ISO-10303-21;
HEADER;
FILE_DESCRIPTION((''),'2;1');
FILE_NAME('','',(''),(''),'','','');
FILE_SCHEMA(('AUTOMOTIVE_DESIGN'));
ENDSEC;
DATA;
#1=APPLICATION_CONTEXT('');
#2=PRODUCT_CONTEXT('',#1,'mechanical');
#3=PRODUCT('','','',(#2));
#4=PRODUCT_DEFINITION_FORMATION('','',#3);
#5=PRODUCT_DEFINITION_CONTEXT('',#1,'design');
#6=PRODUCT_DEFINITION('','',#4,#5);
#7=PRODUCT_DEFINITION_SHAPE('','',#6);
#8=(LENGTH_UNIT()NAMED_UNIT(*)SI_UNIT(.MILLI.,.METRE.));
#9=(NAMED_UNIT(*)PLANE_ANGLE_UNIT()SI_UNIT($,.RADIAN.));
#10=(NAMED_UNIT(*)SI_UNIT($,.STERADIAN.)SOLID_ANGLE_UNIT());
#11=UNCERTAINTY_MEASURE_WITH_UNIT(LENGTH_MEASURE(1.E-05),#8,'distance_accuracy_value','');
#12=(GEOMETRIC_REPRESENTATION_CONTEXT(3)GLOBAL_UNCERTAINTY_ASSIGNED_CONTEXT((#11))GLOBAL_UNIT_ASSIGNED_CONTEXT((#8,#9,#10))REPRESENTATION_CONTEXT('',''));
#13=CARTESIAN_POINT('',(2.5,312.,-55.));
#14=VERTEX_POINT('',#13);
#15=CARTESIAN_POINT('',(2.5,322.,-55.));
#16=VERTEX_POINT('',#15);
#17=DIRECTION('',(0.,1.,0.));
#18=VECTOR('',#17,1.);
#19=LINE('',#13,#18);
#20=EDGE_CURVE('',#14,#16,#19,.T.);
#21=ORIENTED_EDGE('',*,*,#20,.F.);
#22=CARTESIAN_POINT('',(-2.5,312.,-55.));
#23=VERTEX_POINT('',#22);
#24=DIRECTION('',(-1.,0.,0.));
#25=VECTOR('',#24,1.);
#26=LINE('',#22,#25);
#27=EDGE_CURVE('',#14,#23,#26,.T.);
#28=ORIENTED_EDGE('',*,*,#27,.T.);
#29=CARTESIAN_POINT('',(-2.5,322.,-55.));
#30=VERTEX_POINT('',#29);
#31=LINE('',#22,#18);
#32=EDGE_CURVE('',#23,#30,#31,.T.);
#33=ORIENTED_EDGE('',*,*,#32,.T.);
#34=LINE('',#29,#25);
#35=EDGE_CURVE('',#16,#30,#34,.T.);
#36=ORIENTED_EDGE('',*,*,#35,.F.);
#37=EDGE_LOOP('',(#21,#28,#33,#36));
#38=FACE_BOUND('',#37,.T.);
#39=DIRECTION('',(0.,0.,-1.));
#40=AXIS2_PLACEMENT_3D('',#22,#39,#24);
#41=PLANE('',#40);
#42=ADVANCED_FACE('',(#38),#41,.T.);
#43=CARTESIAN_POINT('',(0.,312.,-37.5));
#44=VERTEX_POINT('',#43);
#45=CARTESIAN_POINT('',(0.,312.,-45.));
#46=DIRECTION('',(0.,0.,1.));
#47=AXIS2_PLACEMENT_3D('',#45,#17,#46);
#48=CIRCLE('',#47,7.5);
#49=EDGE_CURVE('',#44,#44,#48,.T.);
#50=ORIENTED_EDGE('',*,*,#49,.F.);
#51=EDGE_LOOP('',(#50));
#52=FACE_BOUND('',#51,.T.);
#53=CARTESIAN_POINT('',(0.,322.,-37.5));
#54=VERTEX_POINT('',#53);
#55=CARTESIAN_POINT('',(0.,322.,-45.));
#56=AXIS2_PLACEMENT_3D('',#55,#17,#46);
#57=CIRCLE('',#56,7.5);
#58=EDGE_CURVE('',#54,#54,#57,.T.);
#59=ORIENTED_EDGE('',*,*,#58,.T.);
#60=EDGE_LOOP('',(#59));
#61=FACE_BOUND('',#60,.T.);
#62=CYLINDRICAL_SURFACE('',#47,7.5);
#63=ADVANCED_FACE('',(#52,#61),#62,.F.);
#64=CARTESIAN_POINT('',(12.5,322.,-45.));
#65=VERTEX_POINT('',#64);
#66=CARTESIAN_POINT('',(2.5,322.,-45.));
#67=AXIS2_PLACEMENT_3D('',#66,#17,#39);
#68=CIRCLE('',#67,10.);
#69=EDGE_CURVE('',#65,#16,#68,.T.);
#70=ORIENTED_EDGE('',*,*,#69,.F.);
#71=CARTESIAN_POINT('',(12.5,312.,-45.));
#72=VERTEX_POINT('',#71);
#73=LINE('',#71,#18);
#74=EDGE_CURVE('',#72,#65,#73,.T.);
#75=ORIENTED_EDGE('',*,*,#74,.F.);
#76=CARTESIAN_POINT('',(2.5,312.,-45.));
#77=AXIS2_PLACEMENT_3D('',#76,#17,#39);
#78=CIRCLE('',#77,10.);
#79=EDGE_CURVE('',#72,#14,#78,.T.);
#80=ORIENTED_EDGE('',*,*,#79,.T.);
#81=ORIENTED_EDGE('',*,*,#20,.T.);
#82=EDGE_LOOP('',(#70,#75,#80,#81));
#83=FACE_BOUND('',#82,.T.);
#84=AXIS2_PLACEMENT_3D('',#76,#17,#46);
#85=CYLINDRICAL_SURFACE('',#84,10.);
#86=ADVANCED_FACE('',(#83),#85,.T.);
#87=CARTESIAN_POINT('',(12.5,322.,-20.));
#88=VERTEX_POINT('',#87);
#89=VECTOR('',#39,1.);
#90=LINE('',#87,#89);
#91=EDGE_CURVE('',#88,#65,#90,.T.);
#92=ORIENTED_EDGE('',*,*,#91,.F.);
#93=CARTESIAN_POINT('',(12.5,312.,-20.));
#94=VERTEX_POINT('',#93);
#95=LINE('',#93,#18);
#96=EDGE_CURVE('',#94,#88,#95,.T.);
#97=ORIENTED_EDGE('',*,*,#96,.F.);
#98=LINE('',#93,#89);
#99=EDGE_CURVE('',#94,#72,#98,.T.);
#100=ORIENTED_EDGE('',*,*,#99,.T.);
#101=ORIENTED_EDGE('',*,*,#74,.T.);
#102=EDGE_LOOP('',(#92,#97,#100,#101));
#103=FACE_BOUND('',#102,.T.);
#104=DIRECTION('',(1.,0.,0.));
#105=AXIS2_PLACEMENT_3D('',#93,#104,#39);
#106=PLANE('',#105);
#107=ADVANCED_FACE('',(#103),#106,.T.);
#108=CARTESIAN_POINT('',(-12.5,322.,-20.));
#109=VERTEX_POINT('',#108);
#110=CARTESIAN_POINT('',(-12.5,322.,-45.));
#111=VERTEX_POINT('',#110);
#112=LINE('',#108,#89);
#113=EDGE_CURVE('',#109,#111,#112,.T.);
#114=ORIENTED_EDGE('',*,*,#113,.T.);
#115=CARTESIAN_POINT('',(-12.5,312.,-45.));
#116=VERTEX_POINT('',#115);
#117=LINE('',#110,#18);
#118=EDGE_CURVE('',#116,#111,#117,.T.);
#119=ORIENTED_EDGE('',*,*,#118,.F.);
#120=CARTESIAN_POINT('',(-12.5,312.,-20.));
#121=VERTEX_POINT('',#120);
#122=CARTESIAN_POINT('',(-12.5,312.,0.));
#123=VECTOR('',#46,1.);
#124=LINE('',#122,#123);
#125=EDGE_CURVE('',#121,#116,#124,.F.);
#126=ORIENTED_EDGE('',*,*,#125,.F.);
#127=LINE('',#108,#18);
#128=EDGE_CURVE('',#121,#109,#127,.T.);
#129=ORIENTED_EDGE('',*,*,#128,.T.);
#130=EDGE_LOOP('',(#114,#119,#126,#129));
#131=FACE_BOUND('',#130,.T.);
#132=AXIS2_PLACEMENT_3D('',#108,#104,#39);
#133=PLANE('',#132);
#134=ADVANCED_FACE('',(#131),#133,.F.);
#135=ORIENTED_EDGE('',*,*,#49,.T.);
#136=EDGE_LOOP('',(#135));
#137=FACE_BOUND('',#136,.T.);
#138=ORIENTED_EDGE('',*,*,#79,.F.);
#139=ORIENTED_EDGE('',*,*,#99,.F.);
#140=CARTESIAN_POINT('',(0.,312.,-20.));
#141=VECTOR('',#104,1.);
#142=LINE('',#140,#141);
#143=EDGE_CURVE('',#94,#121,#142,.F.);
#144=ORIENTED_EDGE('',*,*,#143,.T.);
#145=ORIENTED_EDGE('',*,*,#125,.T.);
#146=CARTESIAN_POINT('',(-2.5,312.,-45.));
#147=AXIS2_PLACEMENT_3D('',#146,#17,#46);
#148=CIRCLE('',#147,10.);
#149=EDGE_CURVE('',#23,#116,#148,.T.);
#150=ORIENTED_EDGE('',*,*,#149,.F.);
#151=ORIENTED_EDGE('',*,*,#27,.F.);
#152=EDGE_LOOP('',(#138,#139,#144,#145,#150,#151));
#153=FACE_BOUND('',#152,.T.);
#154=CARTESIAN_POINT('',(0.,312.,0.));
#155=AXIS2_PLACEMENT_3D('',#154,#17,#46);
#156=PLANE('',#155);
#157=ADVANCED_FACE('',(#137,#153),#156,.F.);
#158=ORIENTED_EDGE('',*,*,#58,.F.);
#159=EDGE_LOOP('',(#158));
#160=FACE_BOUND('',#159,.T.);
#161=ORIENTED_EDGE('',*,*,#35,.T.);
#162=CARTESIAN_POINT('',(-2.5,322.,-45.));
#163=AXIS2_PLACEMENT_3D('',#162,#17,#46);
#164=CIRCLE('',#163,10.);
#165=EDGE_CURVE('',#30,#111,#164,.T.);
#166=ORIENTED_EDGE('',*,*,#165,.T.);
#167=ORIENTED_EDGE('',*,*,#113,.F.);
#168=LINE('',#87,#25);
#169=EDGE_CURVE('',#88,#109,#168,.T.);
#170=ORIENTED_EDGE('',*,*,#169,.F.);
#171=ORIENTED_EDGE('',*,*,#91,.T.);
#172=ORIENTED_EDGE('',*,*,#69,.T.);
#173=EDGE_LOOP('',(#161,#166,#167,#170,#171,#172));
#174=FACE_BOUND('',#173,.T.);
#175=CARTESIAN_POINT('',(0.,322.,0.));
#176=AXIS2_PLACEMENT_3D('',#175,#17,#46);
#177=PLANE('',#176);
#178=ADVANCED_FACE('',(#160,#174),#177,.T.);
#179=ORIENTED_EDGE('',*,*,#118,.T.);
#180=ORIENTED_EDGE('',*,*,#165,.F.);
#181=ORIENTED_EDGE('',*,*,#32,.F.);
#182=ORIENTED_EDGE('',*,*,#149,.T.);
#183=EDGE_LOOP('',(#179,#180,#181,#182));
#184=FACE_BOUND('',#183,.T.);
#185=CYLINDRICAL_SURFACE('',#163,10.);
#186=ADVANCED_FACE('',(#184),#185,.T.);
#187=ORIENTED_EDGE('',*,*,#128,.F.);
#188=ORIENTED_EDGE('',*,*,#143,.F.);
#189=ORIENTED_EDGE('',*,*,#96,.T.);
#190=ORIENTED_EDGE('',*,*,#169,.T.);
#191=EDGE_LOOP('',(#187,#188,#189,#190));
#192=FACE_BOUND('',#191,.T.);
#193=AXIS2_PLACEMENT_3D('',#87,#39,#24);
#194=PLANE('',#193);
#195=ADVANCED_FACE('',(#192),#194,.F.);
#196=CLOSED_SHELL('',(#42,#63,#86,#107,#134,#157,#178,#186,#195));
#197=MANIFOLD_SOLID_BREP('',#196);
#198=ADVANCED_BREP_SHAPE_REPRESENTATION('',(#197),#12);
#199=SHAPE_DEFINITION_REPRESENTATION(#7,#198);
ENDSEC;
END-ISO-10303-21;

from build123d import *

# Parameters (mm, degrees)
STOCK_VARAV_UKSEGA_1_START = 312
STOCK_VARAV_UKSEGA_1_DEPTH = 10
TAB1_START                 = -10
SKETCH1_R                  = 7.5
TAB1_DEPTH                 = 10


# Read off the part's stored shape, not the designer's step: Stock-Varav_uksega-1
# Sheet-metal steps are written as plain solids
with BuildPart() as part:
    # Stock-Varav_uksega-1 outline → Stock-Varav_uksega-1 (new body)
    with BuildSketch(Plane(origin=(0, 0, 0), x_dir=(1, 0, 0), z_dir=(0, 1, 0)).offset(STOCK_VARAV_UKSEGA_1_START)):
        with BuildLine():
            Line((-11, 20), (-11, 50.267826876))
            ThreePointArc((-11, 50.267826876), (-12.117692031, 47.738612787), (-12.5, 45))
            Line((-12.5, 45), (-12.5, 20))
            Line((-12.5, 20), (-11, 20))
        make_face()
    extrude(amount=STOCK_VARAV_UKSEGA_1_DEPTH)

    # Sketch1 → Tab1 (add)
    with BuildSketch(Plane(origin=(0, 322, 0), x_dir=(1, 0, 0), z_dir=(0, 1, 0)).offset(TAB1_START)):
        with BuildLine():
            Line((-12.5, 20), (12.5, 20))
            Line((12.5, 20), (12.5, 45))
            ThreePointArc((12.5, 45), (9.571067812, 52.071067812), (2.5, 55))
            Line((2.5, 55), (-2.5, 55))
            ThreePointArc((-2.5, 55), (-9.571067812, 52.071067812), (-12.5, 45))
            Line((-12.5, 45), (-12.5, 20))
        make_face()
        with Locations(Location((0, 45, 0), (0, 0, 270))):
            Circle(SKETCH1_R, mode=Mode.SUBTRACT)
    extrude(amount=TAB1_DEPTH)


solid = part.part
